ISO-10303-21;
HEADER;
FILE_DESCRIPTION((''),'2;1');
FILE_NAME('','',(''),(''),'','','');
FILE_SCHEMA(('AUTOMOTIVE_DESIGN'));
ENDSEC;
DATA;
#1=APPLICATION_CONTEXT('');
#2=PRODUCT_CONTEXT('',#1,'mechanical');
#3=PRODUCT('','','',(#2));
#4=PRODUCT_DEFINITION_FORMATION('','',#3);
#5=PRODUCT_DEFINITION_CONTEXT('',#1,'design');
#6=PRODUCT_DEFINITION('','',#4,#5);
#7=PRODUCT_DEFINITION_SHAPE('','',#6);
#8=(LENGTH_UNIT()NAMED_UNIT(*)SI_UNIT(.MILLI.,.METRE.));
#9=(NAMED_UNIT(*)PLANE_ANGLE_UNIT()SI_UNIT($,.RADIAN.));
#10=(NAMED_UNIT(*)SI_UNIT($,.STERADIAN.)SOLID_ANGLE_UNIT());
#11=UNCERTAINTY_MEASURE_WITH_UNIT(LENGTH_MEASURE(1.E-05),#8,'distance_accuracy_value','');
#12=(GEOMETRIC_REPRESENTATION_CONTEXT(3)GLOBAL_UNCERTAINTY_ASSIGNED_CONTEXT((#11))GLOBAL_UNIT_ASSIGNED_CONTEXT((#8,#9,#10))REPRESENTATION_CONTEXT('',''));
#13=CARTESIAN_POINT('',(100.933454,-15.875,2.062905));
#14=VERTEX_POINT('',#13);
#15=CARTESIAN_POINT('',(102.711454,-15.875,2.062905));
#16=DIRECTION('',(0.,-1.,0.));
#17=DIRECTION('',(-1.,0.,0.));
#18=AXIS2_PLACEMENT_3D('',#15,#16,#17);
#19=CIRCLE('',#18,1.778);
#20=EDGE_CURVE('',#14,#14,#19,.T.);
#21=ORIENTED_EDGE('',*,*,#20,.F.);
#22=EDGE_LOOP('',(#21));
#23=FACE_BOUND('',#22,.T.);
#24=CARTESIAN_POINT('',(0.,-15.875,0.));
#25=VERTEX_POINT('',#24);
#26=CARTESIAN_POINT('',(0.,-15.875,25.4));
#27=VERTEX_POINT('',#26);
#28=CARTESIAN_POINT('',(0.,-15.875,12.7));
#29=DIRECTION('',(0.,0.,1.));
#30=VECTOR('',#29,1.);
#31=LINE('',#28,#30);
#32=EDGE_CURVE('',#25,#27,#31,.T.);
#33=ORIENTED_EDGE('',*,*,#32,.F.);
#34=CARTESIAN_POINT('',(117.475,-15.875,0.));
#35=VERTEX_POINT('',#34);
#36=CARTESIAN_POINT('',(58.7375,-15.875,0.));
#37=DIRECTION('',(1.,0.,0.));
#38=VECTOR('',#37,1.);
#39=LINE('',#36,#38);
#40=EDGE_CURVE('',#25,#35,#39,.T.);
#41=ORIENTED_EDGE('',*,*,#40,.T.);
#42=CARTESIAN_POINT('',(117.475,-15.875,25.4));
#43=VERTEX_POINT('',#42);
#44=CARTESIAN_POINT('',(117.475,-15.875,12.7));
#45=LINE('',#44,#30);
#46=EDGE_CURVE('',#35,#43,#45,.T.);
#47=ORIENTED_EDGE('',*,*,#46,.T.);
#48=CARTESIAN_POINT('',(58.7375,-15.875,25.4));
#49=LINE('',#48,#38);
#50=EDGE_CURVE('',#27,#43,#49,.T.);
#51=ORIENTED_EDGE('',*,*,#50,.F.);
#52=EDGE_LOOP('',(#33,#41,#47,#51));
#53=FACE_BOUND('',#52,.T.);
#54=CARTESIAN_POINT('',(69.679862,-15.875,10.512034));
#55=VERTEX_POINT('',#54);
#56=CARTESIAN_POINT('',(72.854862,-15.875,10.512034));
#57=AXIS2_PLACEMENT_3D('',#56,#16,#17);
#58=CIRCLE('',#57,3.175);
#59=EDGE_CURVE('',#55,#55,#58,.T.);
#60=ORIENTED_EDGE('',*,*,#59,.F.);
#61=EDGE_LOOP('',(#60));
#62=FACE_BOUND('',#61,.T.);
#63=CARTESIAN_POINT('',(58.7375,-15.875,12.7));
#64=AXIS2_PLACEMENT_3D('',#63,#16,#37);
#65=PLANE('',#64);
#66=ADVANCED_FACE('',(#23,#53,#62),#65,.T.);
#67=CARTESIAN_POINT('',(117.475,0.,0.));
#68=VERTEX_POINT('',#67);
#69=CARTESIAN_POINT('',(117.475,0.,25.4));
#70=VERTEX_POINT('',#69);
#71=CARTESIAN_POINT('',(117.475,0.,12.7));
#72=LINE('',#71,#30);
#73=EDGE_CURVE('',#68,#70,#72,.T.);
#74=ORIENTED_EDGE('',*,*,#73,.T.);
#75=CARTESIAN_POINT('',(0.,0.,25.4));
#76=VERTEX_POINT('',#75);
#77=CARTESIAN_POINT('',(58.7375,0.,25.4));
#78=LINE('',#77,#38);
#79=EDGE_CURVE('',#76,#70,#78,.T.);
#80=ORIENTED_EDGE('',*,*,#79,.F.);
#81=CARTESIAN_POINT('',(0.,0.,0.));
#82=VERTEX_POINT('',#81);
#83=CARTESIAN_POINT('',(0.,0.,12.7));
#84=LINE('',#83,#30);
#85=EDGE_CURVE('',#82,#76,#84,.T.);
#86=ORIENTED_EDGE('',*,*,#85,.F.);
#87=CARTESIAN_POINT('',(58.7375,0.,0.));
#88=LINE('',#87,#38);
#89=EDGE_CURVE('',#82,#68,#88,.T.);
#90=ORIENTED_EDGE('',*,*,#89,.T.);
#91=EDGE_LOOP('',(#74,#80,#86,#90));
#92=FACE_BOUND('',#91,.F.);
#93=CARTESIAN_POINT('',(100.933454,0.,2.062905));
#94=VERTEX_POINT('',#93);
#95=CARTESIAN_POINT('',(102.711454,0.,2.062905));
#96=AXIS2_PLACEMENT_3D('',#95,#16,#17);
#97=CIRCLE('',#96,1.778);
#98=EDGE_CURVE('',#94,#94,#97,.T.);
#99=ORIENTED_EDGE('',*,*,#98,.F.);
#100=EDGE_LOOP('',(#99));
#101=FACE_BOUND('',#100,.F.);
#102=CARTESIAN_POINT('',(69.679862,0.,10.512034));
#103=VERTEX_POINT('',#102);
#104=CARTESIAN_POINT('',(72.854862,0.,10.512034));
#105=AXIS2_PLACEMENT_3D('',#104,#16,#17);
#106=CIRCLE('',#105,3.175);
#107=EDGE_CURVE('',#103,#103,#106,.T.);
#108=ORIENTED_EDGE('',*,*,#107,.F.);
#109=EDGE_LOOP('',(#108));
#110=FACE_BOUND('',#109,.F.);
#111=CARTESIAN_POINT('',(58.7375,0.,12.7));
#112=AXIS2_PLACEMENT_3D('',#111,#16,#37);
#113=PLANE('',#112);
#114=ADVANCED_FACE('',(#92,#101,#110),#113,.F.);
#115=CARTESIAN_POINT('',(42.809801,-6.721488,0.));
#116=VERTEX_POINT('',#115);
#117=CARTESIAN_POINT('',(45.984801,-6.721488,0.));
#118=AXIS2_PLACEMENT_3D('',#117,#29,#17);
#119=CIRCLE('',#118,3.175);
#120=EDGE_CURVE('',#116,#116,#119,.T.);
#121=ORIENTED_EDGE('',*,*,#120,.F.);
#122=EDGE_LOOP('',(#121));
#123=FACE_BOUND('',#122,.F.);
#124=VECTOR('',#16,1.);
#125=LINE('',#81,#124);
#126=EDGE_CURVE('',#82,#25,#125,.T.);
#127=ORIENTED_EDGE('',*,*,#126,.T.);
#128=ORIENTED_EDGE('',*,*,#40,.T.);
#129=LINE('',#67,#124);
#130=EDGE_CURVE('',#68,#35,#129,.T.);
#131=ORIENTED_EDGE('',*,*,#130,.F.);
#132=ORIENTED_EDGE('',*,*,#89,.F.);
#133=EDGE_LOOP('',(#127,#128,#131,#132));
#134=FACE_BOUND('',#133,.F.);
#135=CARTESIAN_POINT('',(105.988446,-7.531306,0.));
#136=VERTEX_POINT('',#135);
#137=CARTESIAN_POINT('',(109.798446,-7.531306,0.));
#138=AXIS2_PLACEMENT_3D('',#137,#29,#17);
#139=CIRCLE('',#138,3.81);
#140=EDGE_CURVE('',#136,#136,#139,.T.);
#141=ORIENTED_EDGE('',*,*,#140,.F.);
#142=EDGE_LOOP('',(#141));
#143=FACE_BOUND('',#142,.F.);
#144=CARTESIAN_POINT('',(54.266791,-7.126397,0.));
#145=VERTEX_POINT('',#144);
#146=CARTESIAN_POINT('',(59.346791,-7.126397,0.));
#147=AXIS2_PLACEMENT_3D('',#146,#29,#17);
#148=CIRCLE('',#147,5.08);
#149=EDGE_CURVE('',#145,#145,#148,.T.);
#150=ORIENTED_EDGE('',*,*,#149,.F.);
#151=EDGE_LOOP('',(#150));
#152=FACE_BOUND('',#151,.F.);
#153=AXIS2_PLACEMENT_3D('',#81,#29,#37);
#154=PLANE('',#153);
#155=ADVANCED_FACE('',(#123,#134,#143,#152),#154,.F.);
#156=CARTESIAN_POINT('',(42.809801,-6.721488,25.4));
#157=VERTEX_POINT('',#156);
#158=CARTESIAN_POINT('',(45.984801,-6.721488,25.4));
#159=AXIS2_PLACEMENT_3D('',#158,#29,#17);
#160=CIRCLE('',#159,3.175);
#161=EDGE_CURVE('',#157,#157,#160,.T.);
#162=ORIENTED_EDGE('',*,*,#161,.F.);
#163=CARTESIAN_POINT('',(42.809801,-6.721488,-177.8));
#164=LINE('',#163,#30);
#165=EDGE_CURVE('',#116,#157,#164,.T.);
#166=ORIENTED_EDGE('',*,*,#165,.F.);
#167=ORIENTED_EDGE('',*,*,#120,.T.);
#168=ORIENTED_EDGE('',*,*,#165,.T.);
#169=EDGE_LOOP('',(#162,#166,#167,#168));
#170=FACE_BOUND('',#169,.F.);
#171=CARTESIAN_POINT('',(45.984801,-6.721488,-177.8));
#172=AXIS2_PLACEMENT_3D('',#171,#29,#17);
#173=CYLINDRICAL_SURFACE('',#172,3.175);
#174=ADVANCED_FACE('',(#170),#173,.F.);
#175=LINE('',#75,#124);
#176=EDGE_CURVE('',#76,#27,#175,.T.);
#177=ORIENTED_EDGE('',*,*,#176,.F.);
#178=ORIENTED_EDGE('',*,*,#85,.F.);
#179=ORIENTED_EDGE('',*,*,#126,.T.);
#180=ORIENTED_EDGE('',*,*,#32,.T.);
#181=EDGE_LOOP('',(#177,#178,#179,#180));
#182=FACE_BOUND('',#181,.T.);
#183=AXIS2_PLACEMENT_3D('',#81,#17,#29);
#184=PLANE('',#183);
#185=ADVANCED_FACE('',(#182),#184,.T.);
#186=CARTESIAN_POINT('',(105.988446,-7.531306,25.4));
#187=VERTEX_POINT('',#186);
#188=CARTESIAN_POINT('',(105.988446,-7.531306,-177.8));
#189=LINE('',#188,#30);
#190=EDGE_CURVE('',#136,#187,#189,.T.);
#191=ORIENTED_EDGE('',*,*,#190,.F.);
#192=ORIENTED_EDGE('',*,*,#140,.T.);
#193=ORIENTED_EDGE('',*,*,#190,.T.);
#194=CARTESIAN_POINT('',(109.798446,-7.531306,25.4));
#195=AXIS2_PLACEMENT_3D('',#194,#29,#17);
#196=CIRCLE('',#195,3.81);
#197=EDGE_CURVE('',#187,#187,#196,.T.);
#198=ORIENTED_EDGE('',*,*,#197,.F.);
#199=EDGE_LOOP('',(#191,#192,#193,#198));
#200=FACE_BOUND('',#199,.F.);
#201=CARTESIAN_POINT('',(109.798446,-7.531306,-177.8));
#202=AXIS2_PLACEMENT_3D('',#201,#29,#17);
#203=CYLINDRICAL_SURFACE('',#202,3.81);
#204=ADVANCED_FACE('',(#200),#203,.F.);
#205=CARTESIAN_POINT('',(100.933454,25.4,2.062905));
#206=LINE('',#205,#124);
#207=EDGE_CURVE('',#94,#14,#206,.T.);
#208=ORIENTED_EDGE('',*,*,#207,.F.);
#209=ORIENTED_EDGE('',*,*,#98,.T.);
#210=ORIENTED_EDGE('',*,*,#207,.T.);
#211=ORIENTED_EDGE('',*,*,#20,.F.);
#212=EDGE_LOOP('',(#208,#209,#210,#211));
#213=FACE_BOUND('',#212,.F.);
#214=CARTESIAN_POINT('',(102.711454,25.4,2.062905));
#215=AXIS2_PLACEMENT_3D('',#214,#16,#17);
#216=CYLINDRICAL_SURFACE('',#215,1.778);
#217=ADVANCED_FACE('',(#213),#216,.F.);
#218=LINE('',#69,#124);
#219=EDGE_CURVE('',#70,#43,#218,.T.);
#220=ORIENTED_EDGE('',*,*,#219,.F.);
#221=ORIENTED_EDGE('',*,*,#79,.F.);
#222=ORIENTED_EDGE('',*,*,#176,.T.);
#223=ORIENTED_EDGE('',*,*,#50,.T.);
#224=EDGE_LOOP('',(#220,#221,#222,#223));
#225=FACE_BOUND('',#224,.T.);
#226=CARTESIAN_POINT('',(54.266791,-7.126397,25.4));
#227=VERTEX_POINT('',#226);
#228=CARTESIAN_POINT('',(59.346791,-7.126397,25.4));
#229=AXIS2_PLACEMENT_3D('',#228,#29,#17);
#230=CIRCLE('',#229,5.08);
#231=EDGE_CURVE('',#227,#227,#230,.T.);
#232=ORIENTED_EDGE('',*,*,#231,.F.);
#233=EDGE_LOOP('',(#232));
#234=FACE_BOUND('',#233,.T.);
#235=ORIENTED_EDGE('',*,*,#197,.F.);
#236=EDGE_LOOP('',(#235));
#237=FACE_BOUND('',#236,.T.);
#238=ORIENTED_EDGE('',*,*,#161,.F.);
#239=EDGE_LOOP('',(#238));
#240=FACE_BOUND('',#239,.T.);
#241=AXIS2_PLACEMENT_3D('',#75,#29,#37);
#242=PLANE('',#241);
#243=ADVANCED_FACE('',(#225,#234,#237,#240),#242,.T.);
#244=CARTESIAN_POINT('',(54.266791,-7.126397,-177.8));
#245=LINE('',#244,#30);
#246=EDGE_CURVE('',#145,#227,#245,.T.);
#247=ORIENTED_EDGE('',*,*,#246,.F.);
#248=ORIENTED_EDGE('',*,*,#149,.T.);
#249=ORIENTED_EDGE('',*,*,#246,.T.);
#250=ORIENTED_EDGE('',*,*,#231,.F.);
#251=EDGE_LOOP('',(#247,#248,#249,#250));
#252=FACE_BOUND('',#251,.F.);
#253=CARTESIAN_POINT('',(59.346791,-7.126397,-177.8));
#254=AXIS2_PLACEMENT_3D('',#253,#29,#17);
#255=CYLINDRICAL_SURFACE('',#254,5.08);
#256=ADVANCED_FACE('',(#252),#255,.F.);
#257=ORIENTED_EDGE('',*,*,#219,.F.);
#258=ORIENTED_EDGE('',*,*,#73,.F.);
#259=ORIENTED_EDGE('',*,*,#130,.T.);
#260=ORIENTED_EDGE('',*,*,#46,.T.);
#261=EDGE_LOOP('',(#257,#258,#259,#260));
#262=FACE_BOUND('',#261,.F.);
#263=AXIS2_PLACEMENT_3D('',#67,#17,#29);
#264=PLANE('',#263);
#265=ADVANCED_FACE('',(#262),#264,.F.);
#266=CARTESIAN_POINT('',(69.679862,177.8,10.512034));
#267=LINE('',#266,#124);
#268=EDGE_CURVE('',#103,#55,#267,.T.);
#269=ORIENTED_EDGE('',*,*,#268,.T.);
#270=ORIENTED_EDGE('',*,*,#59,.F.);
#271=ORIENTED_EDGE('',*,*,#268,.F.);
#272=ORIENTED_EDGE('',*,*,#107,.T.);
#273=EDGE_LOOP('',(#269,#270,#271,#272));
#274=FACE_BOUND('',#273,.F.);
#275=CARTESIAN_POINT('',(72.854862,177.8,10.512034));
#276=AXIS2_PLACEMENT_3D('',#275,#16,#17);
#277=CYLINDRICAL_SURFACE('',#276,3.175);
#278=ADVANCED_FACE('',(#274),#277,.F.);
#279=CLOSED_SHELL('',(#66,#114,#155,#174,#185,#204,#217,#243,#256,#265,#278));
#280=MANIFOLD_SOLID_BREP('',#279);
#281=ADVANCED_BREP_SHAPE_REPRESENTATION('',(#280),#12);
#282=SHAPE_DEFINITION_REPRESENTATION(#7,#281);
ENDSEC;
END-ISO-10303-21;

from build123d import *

# Parameters (mm, degrees)
F0_W      = 117.475
F0_H      = 25.4
F1_DEPTH  = 15.875
F3_D      = 6.35
F3_DEPTH  = 177.8
F3_TIP    = 1.9077324654
F5_D      = 10.16
F5_DEPTH  = 177.8
F5_TIP    = 3.0523719447
F7_D      = 7.62
F7_DEPTH  = 177.8
F7_TIP    = 2.2892789585
F9_D      = 6.35
F9_DEPTH  = 177.8
F9_TIP    = 1.9077324654
F11_D     = 3.556
F11_DEPTH = 25.4
F11_TIP   = 1.0683301806


# Not quite as in the source:
# - a feature names something its author has since deleted; it is built from what else it names


with BuildPart() as f1:
    # F0 (on Front) → F1 (new body)
    with BuildSketch(Plane.XZ):
        with Locations((58.7375, 12.7)):
            Rectangle(F0_W, F0_H)
    extrude(amount=F1_DEPTH)

    # F3
    with Locations(Plane(origin=(0, 0, 0), x_dir=(1, 0, 0), z_dir=(0, 0, -1))):
        with Locations((45.984800905, 6.7214882001)):
            Hole(F3_D / 2, depth=F3_DEPTH)
            with Locations((0, 0, -(F3_DEPTH + F3_TIP / 2))):  # 118° drill point
                Cone(0, F3_D / 2, F3_TIP, mode=Mode.SUBTRACT)

    # F5
    with Locations(Plane(origin=(0, 0, 0), x_dir=(1, 0, 0), z_dir=(0, 0, -1))):
        with Locations((59.3467913568, 7.1263969876)):
            Hole(F5_D / 2, depth=F5_DEPTH)
            with Locations((0, 0, -(F5_DEPTH + F5_TIP / 2))):  # 118° drill point
                Cone(0, F5_D / 2, F5_TIP, mode=Mode.SUBTRACT)

    # F7
    with Locations(Plane(origin=(0, 0, 0), x_dir=(1, 0, 0), z_dir=(0, 0, -1))):
        with Locations((109.7984462976, 7.531305775)):
            Hole(F7_D / 2, depth=F7_DEPTH)
            with Locations((0, 0, -(F7_DEPTH + F7_TIP / 2))):  # 118° drill point
                Cone(0, F7_D / 2, F7_TIP, mode=Mode.SUBTRACT)

    # F9
    with Locations(Plane(origin=(0, 0, 0), x_dir=(1, 0, 0), z_dir=(0, 1, 0))):
        with Locations((72.8548616171, -10.5120344087)):
            Hole(F9_D / 2, depth=F9_DEPTH)
            with Locations((0, 0, -(F9_DEPTH + F9_TIP / 2))):  # 118° drill point
                Cone(0, F9_D / 2, F9_TIP, mode=Mode.SUBTRACT)

    # F11
    with Locations(Plane(origin=(0, 0, 0), x_dir=(1, 0, 0), z_dir=(0, 1, 0))):
        with Locations((102.7114540339, -2.0629046485)):
            Hole(F11_D / 2, depth=F11_DEPTH)
            with Locations((0, 0, -(F11_DEPTH + F11_TIP / 2))):  # 118° drill point
                Cone(0, F11_D / 2, F11_TIP, mode=Mode.SUBTRACT)


solid = f1.part
